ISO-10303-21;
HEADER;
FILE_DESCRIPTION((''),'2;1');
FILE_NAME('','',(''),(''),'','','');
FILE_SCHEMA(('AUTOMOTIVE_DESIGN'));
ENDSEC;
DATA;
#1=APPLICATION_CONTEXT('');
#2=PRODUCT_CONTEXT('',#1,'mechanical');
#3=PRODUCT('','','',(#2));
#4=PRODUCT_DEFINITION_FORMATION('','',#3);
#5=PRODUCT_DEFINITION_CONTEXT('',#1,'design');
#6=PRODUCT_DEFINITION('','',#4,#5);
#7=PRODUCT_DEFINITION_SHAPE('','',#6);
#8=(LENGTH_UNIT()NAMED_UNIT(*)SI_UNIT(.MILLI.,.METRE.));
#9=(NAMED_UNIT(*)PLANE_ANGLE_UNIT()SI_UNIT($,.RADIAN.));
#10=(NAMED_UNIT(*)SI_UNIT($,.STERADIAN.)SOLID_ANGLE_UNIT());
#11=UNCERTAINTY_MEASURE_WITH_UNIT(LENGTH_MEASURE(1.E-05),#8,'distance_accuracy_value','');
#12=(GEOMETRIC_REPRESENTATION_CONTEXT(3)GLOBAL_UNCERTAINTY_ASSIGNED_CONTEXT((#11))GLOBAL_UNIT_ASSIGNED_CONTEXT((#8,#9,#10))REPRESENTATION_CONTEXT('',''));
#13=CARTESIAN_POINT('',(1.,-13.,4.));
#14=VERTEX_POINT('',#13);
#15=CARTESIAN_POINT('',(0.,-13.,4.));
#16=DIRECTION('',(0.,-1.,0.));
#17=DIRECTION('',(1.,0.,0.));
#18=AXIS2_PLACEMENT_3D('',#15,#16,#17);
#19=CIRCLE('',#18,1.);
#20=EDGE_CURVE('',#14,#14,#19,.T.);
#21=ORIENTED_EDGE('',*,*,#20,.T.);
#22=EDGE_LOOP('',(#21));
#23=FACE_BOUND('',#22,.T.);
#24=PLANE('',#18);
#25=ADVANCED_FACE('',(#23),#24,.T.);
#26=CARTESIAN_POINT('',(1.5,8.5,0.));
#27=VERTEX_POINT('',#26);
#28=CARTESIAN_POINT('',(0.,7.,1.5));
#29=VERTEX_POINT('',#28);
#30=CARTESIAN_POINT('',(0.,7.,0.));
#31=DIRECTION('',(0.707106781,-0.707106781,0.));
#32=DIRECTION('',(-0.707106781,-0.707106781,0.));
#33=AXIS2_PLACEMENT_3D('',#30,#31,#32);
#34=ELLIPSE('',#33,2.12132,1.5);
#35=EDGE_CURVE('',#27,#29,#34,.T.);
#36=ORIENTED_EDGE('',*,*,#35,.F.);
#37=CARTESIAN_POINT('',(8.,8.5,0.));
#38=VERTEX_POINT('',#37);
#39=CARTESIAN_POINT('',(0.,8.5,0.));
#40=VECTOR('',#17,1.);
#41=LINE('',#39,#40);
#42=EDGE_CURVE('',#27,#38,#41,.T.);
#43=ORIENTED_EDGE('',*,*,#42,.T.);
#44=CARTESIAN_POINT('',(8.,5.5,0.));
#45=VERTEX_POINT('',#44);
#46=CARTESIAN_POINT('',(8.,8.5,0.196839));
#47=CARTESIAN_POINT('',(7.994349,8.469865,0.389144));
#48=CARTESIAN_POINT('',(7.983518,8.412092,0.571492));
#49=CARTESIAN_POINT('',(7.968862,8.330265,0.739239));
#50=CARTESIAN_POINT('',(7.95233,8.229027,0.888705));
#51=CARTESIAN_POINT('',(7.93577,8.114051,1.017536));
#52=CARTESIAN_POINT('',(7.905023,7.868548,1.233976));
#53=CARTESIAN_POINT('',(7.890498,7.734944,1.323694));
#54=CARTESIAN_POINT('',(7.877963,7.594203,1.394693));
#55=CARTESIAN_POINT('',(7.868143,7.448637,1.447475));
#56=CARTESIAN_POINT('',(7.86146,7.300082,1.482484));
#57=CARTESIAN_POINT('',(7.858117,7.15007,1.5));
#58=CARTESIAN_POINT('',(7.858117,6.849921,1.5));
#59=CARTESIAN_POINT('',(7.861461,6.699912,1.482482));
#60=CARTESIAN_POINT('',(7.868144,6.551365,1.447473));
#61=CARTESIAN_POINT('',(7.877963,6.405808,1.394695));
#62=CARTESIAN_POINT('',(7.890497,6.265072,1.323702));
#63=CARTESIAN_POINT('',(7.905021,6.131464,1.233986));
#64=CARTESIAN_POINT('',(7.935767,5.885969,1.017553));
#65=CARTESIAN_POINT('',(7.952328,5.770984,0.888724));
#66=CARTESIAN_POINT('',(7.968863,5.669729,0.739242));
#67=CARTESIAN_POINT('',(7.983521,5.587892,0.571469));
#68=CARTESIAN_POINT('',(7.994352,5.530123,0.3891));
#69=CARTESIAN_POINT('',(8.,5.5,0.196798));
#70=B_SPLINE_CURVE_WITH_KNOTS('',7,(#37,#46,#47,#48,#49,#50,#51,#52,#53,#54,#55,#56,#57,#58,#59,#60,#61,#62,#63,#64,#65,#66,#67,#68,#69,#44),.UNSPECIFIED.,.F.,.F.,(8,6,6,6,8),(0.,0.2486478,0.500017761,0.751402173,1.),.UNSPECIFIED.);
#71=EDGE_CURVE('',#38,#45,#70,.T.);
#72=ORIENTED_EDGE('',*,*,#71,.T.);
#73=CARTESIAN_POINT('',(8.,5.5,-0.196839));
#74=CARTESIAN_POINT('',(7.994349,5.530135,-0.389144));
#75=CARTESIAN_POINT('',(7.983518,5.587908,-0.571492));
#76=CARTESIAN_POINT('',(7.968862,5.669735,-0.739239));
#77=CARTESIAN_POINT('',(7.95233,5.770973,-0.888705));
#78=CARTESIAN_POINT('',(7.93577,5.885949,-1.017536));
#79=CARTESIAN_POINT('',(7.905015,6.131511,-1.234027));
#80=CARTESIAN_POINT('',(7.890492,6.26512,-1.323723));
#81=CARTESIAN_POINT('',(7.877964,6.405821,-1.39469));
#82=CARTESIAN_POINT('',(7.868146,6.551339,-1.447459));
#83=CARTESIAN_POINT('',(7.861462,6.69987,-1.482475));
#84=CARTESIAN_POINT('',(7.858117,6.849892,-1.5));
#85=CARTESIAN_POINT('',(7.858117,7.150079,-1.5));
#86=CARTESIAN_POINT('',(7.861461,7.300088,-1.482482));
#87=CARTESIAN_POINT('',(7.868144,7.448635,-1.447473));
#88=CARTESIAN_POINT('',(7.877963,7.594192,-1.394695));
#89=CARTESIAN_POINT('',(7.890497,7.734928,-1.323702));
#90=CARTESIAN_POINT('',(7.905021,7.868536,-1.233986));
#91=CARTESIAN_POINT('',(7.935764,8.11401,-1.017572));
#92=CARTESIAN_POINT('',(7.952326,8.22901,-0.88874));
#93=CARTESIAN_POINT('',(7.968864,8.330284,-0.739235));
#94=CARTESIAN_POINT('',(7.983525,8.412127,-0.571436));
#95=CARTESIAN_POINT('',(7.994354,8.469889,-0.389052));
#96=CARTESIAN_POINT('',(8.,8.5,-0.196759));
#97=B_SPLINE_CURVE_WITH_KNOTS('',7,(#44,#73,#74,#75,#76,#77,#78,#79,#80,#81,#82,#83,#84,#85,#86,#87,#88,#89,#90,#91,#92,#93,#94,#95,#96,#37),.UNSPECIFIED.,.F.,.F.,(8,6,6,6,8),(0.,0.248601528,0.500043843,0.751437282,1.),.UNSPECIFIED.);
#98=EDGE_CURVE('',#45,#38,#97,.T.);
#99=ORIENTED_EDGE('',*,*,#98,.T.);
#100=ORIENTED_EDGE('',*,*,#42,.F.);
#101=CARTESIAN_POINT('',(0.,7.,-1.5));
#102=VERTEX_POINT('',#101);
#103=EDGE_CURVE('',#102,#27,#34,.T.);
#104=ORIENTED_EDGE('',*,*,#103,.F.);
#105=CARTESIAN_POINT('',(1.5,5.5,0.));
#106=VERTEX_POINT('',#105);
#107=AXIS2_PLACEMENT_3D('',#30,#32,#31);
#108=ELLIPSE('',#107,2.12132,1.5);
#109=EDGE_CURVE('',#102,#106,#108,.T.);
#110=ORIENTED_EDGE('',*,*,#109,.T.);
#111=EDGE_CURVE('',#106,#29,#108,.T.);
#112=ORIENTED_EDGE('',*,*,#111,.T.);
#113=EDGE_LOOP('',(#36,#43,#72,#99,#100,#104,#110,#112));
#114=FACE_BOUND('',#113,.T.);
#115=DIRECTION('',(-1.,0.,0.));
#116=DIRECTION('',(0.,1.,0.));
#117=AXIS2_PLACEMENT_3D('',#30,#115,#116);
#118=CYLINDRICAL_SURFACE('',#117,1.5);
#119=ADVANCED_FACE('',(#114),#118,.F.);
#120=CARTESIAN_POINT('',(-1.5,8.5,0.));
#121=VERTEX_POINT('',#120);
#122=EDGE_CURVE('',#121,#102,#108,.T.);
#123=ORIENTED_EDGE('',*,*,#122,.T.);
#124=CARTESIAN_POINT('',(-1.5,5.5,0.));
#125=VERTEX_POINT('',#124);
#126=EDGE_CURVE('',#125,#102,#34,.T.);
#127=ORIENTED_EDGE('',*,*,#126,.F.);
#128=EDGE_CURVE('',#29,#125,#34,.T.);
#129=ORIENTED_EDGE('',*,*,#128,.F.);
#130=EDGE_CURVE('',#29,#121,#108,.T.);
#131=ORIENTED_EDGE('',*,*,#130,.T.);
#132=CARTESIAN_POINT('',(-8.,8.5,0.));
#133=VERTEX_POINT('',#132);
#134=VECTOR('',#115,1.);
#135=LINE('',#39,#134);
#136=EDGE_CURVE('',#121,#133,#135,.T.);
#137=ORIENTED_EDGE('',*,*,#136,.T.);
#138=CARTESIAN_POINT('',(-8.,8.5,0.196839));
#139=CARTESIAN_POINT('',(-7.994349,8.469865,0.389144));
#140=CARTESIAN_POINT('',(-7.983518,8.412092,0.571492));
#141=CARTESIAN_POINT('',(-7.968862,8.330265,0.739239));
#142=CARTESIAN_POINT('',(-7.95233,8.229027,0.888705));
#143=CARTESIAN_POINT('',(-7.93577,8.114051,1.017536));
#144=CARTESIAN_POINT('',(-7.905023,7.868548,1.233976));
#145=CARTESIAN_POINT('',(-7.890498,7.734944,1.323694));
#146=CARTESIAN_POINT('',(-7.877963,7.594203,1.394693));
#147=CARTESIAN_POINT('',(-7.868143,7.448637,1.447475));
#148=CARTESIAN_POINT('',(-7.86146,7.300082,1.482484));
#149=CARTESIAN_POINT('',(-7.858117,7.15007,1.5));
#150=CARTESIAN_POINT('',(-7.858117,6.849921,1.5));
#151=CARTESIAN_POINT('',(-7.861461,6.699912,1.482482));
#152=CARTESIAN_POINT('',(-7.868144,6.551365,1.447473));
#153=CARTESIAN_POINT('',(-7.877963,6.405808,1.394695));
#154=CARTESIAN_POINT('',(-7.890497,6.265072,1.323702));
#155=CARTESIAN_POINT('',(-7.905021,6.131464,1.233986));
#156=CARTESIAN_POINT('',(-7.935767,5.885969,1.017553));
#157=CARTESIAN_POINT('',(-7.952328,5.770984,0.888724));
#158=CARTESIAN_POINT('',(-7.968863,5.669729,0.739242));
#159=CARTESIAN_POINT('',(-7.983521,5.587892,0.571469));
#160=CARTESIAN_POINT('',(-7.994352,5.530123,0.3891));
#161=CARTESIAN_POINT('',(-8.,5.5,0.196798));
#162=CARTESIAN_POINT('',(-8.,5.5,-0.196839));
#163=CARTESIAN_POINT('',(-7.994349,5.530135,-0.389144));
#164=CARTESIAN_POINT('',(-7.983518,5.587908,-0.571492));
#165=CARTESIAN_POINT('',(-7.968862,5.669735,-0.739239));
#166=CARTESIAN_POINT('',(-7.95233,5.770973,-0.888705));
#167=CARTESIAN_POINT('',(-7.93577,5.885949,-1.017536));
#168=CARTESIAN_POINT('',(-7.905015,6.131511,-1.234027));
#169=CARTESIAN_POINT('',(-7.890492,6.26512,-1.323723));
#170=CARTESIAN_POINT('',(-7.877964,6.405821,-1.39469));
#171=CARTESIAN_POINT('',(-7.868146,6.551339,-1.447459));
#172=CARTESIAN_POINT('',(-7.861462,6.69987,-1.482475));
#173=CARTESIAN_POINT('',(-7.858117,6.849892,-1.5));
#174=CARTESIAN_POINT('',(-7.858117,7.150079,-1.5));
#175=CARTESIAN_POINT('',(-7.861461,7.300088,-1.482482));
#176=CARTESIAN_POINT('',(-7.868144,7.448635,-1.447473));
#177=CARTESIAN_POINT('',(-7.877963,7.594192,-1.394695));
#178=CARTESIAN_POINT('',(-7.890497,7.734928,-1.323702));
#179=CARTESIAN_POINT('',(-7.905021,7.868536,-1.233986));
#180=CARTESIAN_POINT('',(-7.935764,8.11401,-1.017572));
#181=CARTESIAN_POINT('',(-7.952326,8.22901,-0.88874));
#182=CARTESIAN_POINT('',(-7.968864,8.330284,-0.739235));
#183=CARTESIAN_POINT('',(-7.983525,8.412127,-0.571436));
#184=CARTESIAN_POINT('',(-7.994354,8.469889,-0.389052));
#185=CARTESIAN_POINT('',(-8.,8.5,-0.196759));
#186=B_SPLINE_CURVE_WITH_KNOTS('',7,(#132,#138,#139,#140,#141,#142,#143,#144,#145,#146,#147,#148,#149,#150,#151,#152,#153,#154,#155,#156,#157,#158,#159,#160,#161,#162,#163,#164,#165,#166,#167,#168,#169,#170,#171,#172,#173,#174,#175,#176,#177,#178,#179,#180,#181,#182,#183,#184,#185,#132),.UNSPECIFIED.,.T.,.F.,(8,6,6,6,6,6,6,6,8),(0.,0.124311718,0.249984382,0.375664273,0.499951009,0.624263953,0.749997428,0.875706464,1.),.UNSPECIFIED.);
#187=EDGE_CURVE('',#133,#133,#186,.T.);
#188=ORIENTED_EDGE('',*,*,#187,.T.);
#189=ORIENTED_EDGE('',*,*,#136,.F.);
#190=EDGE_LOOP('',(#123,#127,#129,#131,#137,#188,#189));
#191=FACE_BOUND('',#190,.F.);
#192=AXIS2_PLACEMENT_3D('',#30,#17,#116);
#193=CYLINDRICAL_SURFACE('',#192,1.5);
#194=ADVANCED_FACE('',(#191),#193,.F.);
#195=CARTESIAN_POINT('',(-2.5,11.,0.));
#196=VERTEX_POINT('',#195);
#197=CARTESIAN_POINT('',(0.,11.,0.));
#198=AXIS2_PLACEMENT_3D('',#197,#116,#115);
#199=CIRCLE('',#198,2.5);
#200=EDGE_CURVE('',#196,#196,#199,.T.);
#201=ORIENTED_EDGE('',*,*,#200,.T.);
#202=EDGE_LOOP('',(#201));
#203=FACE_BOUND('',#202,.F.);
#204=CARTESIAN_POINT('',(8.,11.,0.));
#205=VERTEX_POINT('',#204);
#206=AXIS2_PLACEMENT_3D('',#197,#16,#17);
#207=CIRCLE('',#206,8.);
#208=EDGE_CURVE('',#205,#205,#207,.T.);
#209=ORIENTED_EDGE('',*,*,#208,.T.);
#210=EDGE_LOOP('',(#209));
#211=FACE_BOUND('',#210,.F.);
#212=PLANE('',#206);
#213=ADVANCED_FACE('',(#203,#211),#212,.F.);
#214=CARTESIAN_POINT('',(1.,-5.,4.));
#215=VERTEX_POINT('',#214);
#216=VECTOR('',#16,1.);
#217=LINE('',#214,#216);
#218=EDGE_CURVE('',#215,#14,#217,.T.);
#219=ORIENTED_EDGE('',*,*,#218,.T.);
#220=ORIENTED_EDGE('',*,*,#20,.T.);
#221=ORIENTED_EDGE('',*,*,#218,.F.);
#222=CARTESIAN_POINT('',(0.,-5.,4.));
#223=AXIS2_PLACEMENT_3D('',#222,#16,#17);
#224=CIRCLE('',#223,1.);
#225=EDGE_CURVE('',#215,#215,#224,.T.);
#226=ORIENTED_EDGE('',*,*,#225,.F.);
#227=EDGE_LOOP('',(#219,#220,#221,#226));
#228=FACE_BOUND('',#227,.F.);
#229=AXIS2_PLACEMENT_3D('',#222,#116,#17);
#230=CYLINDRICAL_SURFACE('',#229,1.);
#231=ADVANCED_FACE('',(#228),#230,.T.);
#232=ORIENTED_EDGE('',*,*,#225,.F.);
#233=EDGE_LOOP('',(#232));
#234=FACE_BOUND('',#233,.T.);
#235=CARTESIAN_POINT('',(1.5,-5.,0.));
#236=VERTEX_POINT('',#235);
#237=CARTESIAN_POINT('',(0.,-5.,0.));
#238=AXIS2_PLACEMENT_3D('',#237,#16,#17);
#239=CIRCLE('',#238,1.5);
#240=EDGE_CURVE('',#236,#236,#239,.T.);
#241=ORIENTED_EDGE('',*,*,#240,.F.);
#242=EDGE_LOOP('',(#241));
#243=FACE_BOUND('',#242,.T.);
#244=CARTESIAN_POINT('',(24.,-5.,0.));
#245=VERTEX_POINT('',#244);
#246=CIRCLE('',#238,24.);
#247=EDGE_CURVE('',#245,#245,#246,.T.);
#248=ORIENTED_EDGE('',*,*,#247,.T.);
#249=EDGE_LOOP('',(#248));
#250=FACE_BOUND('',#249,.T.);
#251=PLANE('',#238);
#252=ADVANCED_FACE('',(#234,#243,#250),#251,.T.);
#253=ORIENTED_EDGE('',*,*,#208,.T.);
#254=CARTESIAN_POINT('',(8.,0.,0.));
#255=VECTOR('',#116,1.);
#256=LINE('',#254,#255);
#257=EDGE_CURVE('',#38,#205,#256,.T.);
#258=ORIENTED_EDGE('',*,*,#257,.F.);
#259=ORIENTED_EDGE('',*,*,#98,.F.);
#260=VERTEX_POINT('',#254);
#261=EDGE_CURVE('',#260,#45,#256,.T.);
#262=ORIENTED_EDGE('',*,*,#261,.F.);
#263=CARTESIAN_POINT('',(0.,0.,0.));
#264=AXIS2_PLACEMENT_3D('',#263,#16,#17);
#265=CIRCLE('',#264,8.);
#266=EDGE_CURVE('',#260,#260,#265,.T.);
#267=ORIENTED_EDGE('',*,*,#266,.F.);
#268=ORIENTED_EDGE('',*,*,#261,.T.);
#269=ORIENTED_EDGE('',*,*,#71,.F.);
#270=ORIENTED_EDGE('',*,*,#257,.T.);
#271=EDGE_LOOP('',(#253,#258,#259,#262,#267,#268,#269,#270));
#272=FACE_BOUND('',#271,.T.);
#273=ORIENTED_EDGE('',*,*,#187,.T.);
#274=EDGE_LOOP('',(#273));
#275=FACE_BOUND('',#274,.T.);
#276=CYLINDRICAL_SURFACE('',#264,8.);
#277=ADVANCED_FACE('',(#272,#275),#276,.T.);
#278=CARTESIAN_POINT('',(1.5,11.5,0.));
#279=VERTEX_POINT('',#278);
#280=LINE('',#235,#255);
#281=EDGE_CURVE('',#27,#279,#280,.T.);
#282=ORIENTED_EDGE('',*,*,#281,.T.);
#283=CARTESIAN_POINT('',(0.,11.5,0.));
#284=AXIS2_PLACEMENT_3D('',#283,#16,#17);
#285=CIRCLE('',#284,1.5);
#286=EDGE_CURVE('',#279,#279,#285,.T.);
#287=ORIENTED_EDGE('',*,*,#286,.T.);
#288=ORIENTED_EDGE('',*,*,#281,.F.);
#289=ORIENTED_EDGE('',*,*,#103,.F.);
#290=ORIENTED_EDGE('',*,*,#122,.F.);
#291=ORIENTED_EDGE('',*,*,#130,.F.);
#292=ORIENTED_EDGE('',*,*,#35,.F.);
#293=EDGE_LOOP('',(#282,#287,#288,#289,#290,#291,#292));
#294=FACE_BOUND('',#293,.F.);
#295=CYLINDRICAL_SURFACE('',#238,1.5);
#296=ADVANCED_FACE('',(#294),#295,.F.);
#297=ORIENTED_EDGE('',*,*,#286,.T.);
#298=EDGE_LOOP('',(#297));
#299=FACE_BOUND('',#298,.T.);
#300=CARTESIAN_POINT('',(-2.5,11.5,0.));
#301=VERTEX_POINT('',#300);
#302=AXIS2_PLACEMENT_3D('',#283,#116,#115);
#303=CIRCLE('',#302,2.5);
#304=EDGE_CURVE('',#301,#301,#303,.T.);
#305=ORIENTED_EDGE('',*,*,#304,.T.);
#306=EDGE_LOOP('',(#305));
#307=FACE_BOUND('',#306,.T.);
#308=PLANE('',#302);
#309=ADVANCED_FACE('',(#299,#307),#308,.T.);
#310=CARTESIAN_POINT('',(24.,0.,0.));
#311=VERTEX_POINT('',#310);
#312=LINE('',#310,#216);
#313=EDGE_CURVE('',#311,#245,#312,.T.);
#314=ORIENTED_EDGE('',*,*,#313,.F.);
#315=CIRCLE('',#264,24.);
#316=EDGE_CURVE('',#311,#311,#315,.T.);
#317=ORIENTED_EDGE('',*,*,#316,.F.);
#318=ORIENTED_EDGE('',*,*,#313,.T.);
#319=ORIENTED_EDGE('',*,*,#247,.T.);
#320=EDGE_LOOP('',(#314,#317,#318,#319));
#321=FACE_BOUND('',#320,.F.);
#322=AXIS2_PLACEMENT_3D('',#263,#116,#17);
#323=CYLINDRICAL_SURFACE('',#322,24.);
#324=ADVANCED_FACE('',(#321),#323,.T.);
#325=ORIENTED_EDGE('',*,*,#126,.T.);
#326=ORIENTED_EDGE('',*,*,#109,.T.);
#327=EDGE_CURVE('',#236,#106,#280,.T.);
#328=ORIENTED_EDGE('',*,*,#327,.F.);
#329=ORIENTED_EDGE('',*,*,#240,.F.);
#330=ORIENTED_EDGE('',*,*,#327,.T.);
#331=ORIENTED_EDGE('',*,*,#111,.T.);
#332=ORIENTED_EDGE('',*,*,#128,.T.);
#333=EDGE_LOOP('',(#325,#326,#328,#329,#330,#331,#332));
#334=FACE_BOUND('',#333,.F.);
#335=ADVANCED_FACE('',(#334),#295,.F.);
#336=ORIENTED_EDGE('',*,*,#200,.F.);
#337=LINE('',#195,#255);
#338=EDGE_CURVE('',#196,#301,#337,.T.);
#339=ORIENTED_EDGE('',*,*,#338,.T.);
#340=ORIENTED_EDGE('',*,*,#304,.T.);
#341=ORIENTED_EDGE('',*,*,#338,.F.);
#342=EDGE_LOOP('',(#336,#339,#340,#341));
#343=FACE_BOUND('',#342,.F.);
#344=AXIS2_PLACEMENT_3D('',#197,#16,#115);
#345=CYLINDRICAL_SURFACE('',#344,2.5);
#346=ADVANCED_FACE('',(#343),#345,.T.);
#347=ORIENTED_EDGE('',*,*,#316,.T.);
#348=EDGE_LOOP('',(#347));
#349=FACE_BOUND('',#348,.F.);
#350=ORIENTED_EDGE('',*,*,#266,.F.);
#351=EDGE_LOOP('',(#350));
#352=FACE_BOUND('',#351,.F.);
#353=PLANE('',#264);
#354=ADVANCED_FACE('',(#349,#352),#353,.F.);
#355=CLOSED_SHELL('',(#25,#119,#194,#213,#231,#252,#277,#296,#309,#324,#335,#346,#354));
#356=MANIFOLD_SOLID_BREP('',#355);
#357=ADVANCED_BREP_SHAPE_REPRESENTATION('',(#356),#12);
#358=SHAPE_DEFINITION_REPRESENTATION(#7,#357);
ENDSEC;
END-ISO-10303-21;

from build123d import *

# Parameters (mm, degrees)
F0_R          = 24
F0_R_2        = 8
F1_DEPTH      = 5
F2_DEPTH      = 11
F3_R          = 2.5
F4_DEPTH      = 0.5
F5_R          = 1.5
F6_DEPTH      = 25
F5_R_2        = 1
F7_DEPTH      = 8
F8_R          = 1.5
F9_DEPTH      = 24.001
F9_DEPTH_BACK = 24.001


with BuildPart() as f1:
    # F0 (on Front) → F1 (new body)
    with BuildSketch(Plane.XZ):
        Circle(F0_R)
        Circle(F0_R_2, mode=Mode.SUBTRACT)
        Circle(F0_R_2)
    extrude(amount=F1_DEPTH)

    # F0 (on Front) → F2 (join)
    with BuildSketch(Plane.XZ):
        Circle(F0_R_2)
    extrude(amount=-F2_DEPTH)

    # F3 (on face) → F4 (join)
    with BuildSketch(Plane(origin=(0, 11, 0), x_dir=(-1, 0, 0), z_dir=(0, 1, 0))):
        Circle(F3_R)
    extrude(amount=F4_DEPTH)

    # F5 (on face) → F6 (cut)
    with BuildSketch(Plane.XZ.offset(5)):
        Circle(F5_R)
    extrude(amount=-F6_DEPTH, mode=Mode.SUBTRACT)

    # F5 (on face) → F7 (join)
    with BuildSketch(Plane.XZ.offset(5)):
        with Locations((0, 4)):
            Circle(F5_R_2)
    extrude(amount=F7_DEPTH)

    # F8 (on Right) → F9 (cut, two sides)
    with BuildSketch(Plane.YZ) as f9_sk:
        with Locations((7, 0)):
            Circle(F8_R)
    extrude(amount=-F9_DEPTH, mode=Mode.SUBTRACT)
    extrude(f9_sk.sketch, amount=F9_DEPTH_BACK, mode=Mode.SUBTRACT)


solid = f1.part
